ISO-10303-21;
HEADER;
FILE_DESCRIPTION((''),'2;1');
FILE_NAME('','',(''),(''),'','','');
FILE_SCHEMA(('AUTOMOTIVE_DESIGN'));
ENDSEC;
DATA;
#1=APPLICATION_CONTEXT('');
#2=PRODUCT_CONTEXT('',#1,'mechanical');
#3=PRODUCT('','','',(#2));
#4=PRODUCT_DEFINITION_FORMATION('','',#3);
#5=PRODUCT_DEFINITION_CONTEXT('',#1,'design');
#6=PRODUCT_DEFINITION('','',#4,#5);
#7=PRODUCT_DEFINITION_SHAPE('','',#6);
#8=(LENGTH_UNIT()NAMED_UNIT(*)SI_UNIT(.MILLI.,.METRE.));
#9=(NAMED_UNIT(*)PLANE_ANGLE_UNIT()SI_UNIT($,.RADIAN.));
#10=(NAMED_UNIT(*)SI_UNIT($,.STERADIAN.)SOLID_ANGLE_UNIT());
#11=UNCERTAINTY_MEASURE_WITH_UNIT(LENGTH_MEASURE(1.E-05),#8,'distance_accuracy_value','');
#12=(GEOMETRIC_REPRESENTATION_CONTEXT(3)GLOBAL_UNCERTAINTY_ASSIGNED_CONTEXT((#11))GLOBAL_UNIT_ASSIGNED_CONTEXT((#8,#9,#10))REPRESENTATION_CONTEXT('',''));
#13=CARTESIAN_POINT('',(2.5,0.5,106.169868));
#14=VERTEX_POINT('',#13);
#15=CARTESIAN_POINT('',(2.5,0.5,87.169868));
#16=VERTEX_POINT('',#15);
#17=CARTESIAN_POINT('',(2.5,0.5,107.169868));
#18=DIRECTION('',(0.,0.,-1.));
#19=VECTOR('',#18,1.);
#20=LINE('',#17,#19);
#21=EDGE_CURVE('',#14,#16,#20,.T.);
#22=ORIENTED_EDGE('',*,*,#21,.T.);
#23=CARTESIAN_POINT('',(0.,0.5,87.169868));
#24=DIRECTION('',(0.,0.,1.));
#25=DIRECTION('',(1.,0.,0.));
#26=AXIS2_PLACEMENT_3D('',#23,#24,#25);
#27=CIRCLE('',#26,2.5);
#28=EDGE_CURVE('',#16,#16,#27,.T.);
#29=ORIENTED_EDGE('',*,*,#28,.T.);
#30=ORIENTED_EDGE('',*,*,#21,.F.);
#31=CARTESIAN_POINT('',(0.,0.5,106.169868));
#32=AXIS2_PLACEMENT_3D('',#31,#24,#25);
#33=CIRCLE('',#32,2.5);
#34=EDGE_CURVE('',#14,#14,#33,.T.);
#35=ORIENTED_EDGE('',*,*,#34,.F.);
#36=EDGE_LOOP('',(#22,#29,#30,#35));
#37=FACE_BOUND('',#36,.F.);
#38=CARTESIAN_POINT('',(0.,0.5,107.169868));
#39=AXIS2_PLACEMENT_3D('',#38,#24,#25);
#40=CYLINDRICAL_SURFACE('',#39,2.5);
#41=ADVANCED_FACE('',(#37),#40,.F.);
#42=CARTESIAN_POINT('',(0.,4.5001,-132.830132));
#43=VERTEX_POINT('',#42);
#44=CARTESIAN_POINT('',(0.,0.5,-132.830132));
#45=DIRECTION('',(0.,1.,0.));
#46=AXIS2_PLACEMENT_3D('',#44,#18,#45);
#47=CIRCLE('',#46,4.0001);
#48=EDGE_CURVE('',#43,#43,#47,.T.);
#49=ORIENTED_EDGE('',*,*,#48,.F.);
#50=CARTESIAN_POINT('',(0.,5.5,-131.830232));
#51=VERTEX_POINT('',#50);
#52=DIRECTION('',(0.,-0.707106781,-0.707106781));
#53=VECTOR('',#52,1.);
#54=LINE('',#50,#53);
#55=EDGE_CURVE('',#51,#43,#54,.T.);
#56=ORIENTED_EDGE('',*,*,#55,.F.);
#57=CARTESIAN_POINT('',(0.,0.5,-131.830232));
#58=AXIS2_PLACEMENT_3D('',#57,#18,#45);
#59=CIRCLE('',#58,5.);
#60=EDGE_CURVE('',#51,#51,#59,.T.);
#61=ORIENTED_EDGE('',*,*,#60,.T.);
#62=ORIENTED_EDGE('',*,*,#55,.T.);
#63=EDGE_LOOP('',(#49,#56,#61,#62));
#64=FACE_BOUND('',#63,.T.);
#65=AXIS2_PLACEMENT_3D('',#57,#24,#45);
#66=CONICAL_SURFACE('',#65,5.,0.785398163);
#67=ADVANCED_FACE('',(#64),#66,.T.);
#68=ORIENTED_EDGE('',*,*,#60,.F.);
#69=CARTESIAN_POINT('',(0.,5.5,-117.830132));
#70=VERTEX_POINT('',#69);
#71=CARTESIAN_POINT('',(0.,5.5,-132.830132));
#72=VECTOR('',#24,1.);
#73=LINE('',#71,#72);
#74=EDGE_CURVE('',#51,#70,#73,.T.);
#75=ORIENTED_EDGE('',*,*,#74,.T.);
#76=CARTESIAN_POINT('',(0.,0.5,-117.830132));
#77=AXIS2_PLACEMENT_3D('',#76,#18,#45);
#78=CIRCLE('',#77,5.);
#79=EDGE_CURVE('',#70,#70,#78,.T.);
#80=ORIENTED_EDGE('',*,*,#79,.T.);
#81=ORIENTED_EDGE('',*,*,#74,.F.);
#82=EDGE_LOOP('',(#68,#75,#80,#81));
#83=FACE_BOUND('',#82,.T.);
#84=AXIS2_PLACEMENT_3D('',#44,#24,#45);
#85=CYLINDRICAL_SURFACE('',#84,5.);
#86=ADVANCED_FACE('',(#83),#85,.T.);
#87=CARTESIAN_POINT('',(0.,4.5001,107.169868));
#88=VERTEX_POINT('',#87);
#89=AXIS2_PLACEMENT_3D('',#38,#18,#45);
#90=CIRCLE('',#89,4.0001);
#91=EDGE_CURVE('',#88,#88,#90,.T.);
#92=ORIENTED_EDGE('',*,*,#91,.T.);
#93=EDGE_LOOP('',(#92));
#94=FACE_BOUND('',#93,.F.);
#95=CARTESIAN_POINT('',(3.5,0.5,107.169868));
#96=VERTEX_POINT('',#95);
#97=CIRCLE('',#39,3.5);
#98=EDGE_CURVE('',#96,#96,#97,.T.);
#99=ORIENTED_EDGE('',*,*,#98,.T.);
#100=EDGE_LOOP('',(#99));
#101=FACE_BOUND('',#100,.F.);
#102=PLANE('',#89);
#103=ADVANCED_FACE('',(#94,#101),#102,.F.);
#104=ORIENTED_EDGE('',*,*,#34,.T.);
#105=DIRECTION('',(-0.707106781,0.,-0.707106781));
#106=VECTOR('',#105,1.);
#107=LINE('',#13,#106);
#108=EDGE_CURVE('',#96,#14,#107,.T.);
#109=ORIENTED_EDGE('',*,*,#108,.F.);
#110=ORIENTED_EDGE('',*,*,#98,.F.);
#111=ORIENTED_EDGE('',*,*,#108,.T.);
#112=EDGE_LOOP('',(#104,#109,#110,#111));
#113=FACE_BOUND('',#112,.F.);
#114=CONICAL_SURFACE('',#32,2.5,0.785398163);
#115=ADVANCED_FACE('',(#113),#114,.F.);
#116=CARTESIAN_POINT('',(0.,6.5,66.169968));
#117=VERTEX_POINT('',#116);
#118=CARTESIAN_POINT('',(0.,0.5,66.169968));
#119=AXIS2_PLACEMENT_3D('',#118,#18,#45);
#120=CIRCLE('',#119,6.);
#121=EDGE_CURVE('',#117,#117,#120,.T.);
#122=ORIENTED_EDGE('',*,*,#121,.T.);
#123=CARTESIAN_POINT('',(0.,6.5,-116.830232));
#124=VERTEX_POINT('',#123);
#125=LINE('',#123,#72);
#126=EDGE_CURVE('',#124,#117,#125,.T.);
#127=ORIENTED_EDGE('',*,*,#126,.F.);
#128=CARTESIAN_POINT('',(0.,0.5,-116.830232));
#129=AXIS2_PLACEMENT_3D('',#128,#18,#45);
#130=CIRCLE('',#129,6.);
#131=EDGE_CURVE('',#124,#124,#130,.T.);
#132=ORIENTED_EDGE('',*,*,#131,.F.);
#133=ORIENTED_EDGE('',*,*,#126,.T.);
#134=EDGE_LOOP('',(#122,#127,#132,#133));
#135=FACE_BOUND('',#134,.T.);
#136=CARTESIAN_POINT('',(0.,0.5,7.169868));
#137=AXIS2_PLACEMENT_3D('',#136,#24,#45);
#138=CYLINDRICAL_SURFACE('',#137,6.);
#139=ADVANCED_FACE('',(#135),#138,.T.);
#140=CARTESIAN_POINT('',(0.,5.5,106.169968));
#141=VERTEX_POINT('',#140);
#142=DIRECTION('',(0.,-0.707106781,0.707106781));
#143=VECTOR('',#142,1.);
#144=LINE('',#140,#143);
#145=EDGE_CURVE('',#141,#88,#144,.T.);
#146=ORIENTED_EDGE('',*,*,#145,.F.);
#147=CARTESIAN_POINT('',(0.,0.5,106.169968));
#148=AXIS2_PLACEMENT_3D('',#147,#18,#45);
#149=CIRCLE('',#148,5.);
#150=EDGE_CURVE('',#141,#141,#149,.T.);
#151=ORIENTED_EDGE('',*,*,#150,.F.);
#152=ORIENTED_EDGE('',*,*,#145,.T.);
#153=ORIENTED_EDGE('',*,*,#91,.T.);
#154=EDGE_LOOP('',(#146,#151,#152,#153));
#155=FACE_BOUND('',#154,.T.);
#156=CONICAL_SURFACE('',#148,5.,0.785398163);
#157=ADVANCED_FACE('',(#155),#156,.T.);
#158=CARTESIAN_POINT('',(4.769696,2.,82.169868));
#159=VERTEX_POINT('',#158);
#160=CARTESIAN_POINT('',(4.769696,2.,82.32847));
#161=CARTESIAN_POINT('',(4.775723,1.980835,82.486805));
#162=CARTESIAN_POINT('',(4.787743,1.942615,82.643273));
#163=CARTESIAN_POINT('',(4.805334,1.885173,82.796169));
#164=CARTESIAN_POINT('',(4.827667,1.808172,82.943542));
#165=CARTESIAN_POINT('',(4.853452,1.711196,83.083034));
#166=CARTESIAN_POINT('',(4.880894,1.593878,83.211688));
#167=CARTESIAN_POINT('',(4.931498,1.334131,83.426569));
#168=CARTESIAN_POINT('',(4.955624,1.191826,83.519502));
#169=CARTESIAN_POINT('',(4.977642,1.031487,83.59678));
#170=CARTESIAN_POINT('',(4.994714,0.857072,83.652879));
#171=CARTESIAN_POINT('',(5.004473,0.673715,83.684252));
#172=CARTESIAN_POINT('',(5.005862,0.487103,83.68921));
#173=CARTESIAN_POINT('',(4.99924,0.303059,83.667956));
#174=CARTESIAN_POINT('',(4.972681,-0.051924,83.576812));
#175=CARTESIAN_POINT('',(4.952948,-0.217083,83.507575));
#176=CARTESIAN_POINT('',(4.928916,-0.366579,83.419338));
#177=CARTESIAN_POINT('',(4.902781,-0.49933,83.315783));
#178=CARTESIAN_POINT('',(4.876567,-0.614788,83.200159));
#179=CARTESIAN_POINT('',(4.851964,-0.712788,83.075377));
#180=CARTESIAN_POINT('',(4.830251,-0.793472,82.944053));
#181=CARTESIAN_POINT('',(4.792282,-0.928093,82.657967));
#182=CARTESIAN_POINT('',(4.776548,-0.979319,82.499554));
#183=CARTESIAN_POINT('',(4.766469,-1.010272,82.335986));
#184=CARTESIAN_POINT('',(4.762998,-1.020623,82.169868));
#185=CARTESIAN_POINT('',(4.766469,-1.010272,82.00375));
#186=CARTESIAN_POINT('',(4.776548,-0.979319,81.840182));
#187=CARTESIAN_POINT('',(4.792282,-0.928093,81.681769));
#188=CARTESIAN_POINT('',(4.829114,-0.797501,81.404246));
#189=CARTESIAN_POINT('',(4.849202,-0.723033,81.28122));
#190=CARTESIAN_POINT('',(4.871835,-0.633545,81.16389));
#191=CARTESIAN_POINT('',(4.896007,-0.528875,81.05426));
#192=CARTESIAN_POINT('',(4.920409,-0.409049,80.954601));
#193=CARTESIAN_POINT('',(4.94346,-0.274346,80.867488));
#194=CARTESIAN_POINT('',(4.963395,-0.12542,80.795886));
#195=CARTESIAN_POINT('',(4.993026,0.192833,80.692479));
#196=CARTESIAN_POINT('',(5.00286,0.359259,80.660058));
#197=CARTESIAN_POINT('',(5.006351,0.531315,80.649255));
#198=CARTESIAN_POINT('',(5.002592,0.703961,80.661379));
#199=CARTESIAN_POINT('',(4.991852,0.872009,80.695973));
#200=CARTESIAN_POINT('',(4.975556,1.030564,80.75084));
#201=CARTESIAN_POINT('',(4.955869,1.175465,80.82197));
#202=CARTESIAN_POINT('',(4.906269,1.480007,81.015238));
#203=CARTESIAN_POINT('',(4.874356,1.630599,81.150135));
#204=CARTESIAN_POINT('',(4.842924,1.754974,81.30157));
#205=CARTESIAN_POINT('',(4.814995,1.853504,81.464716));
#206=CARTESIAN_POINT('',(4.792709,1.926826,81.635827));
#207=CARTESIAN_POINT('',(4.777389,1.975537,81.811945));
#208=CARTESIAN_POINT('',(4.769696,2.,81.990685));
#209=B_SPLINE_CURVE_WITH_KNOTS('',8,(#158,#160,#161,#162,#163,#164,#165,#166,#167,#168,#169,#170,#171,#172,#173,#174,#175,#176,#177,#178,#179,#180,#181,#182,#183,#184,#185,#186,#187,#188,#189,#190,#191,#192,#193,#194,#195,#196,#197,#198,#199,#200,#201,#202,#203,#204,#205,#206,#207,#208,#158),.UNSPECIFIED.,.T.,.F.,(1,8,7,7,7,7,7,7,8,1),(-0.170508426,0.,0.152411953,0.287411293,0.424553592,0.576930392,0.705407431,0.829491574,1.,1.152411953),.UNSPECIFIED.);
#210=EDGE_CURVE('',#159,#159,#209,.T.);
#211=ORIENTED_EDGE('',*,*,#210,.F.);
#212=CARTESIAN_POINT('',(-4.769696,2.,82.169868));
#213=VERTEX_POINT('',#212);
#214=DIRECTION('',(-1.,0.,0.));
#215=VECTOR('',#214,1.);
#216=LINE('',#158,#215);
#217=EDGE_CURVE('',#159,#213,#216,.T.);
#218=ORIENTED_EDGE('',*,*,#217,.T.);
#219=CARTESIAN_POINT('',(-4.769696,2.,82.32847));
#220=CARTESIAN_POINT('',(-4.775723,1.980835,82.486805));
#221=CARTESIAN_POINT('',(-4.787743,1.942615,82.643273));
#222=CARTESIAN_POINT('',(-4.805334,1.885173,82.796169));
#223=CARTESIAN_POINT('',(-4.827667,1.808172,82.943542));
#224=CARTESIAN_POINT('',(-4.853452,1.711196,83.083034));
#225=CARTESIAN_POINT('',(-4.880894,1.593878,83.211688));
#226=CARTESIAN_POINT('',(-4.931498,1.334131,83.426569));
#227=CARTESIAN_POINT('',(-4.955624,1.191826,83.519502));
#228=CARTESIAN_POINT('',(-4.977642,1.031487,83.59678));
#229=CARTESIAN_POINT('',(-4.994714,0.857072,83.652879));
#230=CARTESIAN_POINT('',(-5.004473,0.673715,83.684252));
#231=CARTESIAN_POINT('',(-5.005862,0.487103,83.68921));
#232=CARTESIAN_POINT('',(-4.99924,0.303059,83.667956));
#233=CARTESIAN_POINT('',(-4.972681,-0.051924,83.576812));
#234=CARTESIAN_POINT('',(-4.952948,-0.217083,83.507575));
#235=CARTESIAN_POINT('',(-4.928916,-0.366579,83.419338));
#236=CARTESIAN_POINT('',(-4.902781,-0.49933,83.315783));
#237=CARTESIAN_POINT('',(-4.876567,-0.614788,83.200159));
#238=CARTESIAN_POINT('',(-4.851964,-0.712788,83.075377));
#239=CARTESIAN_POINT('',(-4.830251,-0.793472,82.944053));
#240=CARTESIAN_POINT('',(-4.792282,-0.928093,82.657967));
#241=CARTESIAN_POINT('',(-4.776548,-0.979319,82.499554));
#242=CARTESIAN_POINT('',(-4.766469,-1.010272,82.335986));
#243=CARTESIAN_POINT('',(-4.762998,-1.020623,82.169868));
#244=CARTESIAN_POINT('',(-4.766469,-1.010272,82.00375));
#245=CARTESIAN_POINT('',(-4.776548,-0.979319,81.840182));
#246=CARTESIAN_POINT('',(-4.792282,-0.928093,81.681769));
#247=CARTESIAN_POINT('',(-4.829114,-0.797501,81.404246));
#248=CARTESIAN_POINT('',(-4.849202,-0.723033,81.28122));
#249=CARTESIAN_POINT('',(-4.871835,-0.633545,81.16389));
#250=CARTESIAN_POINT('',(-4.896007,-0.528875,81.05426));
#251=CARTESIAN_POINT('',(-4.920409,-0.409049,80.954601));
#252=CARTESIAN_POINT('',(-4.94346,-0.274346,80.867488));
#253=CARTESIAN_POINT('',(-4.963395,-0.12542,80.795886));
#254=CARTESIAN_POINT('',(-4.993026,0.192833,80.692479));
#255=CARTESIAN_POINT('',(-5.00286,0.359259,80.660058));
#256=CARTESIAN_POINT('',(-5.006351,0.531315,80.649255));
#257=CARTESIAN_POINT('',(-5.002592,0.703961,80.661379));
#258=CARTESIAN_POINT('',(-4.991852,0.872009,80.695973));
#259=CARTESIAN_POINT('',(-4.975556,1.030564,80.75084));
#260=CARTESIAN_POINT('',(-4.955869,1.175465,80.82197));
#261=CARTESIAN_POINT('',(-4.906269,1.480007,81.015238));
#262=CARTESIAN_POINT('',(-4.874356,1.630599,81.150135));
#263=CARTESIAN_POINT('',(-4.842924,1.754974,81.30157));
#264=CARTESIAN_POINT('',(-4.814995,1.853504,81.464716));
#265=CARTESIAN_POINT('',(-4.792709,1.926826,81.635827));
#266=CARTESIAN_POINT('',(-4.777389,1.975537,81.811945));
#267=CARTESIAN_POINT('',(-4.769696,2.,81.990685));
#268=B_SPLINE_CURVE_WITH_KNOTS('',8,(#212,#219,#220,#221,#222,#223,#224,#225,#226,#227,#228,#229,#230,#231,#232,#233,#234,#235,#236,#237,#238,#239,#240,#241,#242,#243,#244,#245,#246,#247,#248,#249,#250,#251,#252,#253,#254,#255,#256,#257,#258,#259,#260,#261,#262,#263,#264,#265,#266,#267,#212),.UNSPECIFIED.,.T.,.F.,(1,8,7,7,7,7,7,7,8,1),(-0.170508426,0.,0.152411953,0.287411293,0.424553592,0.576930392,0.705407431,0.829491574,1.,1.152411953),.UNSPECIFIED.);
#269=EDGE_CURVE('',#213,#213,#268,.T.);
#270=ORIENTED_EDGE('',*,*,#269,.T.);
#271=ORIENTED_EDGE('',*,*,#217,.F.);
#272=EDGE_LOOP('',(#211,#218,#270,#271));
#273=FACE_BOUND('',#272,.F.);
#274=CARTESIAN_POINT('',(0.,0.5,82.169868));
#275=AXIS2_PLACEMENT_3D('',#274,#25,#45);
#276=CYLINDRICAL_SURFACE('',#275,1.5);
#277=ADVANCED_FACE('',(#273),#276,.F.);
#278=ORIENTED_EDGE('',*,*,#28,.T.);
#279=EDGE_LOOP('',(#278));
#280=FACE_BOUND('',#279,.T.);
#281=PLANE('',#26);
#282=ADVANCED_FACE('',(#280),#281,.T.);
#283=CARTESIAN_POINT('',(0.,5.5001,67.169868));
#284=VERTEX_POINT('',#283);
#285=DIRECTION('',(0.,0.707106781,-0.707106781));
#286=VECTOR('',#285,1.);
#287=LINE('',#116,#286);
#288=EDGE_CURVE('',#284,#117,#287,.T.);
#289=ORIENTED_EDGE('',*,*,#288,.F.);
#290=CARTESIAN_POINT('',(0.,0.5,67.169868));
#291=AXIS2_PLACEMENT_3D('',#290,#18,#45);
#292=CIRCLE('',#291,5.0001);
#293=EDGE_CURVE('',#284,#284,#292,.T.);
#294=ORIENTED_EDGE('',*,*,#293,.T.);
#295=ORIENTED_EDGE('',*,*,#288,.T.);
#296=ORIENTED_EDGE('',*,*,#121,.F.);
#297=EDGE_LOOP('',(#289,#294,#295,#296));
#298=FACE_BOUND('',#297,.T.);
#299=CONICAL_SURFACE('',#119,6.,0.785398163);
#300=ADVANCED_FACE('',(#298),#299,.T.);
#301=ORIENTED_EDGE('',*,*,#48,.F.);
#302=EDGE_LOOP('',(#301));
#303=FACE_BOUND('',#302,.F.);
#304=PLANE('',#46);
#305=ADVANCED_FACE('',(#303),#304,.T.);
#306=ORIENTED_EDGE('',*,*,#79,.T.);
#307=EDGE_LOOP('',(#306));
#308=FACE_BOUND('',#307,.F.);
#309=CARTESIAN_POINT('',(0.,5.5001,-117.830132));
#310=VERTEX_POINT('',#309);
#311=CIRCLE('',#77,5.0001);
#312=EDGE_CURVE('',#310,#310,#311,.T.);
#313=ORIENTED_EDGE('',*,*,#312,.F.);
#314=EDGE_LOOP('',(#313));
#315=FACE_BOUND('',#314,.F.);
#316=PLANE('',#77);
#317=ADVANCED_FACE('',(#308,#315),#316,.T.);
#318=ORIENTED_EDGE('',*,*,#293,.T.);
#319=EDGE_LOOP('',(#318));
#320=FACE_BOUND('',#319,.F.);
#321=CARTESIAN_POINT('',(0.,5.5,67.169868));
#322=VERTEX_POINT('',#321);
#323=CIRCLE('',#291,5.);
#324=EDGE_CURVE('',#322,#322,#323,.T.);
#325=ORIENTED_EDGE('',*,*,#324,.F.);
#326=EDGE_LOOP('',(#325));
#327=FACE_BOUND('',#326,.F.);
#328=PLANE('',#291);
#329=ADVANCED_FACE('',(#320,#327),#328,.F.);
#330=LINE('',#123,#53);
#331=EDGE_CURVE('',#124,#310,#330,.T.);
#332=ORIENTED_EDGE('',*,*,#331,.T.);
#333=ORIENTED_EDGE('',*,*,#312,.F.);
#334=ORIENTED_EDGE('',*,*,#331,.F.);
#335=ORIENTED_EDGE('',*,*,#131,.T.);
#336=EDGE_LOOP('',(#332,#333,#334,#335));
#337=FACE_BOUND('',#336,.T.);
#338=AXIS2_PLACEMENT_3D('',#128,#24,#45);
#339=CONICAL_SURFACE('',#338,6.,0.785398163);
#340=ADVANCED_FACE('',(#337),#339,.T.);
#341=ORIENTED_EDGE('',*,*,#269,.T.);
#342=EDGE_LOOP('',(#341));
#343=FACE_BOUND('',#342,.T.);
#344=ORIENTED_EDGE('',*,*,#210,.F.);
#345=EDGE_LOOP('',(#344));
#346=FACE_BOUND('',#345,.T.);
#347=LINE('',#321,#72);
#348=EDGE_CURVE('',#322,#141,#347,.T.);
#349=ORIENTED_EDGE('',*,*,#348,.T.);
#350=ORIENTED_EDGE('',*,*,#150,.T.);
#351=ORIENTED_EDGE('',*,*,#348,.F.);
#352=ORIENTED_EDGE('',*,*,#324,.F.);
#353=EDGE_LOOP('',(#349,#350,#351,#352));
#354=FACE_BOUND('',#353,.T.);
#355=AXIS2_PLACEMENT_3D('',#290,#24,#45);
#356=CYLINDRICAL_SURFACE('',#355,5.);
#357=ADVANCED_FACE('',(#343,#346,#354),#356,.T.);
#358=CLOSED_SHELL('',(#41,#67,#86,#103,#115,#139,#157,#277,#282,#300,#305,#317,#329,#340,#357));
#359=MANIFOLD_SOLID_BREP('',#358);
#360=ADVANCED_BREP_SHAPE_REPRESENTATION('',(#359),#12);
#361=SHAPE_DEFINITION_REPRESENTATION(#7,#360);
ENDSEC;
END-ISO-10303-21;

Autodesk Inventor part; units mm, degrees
ref_plane "YZ Plane" through (0, 0, 0) normal (1, 0, 0) x (0, 1, 0)
ref_plane "XZ Plane" through (0, 0, 0) normal (0, 1, 0) x (-1, 0, 0)
ref_plane "XY Plane" through (0, 0, 0) normal (0, 0, 1) x (1, 0, 0)
sketch "Sketch1" plane through (0, 0, 0) normal (1, 0, 0) x (0, 1, 0)
  line L0 (0.5, 107.169868) -> (0.5, -132.830132)
  line L1 (0.5, -132.830132) -> (5.5, -132.830132)
  line L2 (5.5, -132.830132) -> (5.5, -117.830132)
  line L3 (5.5, -117.830132) -> (6.5, -117.830132)
  line L4 (6.5, -117.830132) -> (6.5, -42.830132)
  line L5 (6.5, -42.830132) -> (6.5, -42.830132)
  line L6 (6.5, -42.830132) -> (6.5, 7.169868)
  line L7 (6.5, 7.169868) -> (6.5, 7.169868)
  line L8 (6.5, 7.169868) -> (6.5, 67.169868)
  line L9 (6.5, 67.169868) -> (5.5, 67.169868)
  line L10 (5.5, 67.169868) -> (5.5, 107.169868)
  line L11 (5.5, 107.169868) -> (0.5, 107.169868)
  circle A0 centre (0.5, 82.169868) radius 1.5
  point P0 (0, 0)
  dimension "d2" = 5
  dimension "d3" = 5
  dimension "d4" = 6
  dimension "d5" = 6
  dimension "d6" = 6
  dimension "d7" = 40
  dimension "d8" = 50
  dimension "d9" = 60
  dimension "d10" = 75
  dimension "d11" = 15
  dimension "d28" = 3
  dimension "d43" = 15
sketch "Sketch1 outline for Revolution2" plane through (0, 0, 0) normal (1, 0, 0) x (0, 1, 0)
  line L0 (5.5, 107.169868) -> (0.5, 107.169868)
  line L1 (5.5, 67.169868) -> (5.5, 107.169868)
  line L2 (6.5, 67.169868) -> (5.5, 67.169868)
  line L3 (6.5, 7.169868) -> (6.5, 67.169868)
  line L4 (6.5, -42.830132) -> (6.5, 7.169868)
  line L5 (6.5, -117.830132) -> (6.5, -42.830132)
  line L6 (5.5, -117.830132) -> (6.5, -117.830132)
  line L7 (5.5, -132.830132) -> (5.5, -117.830132)
  line L8 (0.5, -132.830132) -> (5.5, -132.830132)
  line L9 (0.5, 107.169868) -> (0.5, -132.830132)
revolve "Revolution2" add sketch "Sketch1 outline for Revolution2" angle 360 about axis through (0, 0.5, 107.169868) along (0, 0, -1)
chamfer "Chamfer1" distance 1 angle 45 6 edges at (0, -4.5, 107.1699) (0, -5.5, 67.1699) (0, -5.5, 7.1699) (0, -5.5, -42.8301) (0, -5.5, -117.8301) (0, -4.5, -132.8301)
thread "Thread2" size "M12x1.5" class "6g" standard "ANSI Metric M Profile" length 20
thread "Thread3" size "M10x1" class "6g" standard "ANSI Metric M Profile" full length
sketch "Sketch1 outline for Extrusion2" plane through (0, 0, 0) normal (1, 0, 0) x (0, 1, 0)
  circle A0 centre (0.5, 82.169868) radius 1.5
extrude "Extrusion2" cut sketch "Sketch1 outline for Extrusion2" along normal through all both and the other way through all
thread "Thread4" size "M10x1.5" class "6g" standard "ANSI Metric M Profile" length 25
sketch "Sketch2" plane through (0, 0.5, 107.169868) normal (0, 0, 1) x (1, 0, 0)
  circle A0 centre (0, 0) radius 4 projected
  circle A1 centre (0, 0) radius 2.5
  point P0 (0, -0.5)
  dimension "d35" = 5
sketch "Sketch2 outline for Extrusion3" plane through (0, 0.5, 107.169868) normal (0, 0, 1) x (1, 0, 0)
  circle A0 centre (0, 0) radius 2.5
extrude "Extrusion3" cut sketch "Sketch2 outline for Extrusion3" against normal blind 20
chamfer "Chamfer2" distance 1 angle 45 1 edges at (-2.5, 0.5, 107.1699)
thread "Thread5" size "M5x0.8" class "6H" standard "ANSI Metric M Profile" full length
equation "\"d6\" = d5"
equation "\"d10\" = NagyKerékSzélesege"
equation "\"ZártSzelvényFalVastagság\" = 1.5"
equation "\"ZártSzelvényBelsőÁtmérő\" = 12"
equation "\"ZártSzelvényKülsőÁtmérő\" = 15"
equation "\"CsapágyBelsőÁtmérő\" = 12"
equation "\"CsapágySzélesége\" = 8"
equation "\"CsapágyKülsőÁtmérő\" = 28"
equation "\"CsapágyHázBelsőÁtmérő\" = 26"
equation "\"CsapágyHázHoszza\" = 45"
equation "\"CsapágyHázKülsőÁtmérő\" = 32"
equation "\"NagyKerékSzélesege\" = 75"
properties part number "NagyTengely"
